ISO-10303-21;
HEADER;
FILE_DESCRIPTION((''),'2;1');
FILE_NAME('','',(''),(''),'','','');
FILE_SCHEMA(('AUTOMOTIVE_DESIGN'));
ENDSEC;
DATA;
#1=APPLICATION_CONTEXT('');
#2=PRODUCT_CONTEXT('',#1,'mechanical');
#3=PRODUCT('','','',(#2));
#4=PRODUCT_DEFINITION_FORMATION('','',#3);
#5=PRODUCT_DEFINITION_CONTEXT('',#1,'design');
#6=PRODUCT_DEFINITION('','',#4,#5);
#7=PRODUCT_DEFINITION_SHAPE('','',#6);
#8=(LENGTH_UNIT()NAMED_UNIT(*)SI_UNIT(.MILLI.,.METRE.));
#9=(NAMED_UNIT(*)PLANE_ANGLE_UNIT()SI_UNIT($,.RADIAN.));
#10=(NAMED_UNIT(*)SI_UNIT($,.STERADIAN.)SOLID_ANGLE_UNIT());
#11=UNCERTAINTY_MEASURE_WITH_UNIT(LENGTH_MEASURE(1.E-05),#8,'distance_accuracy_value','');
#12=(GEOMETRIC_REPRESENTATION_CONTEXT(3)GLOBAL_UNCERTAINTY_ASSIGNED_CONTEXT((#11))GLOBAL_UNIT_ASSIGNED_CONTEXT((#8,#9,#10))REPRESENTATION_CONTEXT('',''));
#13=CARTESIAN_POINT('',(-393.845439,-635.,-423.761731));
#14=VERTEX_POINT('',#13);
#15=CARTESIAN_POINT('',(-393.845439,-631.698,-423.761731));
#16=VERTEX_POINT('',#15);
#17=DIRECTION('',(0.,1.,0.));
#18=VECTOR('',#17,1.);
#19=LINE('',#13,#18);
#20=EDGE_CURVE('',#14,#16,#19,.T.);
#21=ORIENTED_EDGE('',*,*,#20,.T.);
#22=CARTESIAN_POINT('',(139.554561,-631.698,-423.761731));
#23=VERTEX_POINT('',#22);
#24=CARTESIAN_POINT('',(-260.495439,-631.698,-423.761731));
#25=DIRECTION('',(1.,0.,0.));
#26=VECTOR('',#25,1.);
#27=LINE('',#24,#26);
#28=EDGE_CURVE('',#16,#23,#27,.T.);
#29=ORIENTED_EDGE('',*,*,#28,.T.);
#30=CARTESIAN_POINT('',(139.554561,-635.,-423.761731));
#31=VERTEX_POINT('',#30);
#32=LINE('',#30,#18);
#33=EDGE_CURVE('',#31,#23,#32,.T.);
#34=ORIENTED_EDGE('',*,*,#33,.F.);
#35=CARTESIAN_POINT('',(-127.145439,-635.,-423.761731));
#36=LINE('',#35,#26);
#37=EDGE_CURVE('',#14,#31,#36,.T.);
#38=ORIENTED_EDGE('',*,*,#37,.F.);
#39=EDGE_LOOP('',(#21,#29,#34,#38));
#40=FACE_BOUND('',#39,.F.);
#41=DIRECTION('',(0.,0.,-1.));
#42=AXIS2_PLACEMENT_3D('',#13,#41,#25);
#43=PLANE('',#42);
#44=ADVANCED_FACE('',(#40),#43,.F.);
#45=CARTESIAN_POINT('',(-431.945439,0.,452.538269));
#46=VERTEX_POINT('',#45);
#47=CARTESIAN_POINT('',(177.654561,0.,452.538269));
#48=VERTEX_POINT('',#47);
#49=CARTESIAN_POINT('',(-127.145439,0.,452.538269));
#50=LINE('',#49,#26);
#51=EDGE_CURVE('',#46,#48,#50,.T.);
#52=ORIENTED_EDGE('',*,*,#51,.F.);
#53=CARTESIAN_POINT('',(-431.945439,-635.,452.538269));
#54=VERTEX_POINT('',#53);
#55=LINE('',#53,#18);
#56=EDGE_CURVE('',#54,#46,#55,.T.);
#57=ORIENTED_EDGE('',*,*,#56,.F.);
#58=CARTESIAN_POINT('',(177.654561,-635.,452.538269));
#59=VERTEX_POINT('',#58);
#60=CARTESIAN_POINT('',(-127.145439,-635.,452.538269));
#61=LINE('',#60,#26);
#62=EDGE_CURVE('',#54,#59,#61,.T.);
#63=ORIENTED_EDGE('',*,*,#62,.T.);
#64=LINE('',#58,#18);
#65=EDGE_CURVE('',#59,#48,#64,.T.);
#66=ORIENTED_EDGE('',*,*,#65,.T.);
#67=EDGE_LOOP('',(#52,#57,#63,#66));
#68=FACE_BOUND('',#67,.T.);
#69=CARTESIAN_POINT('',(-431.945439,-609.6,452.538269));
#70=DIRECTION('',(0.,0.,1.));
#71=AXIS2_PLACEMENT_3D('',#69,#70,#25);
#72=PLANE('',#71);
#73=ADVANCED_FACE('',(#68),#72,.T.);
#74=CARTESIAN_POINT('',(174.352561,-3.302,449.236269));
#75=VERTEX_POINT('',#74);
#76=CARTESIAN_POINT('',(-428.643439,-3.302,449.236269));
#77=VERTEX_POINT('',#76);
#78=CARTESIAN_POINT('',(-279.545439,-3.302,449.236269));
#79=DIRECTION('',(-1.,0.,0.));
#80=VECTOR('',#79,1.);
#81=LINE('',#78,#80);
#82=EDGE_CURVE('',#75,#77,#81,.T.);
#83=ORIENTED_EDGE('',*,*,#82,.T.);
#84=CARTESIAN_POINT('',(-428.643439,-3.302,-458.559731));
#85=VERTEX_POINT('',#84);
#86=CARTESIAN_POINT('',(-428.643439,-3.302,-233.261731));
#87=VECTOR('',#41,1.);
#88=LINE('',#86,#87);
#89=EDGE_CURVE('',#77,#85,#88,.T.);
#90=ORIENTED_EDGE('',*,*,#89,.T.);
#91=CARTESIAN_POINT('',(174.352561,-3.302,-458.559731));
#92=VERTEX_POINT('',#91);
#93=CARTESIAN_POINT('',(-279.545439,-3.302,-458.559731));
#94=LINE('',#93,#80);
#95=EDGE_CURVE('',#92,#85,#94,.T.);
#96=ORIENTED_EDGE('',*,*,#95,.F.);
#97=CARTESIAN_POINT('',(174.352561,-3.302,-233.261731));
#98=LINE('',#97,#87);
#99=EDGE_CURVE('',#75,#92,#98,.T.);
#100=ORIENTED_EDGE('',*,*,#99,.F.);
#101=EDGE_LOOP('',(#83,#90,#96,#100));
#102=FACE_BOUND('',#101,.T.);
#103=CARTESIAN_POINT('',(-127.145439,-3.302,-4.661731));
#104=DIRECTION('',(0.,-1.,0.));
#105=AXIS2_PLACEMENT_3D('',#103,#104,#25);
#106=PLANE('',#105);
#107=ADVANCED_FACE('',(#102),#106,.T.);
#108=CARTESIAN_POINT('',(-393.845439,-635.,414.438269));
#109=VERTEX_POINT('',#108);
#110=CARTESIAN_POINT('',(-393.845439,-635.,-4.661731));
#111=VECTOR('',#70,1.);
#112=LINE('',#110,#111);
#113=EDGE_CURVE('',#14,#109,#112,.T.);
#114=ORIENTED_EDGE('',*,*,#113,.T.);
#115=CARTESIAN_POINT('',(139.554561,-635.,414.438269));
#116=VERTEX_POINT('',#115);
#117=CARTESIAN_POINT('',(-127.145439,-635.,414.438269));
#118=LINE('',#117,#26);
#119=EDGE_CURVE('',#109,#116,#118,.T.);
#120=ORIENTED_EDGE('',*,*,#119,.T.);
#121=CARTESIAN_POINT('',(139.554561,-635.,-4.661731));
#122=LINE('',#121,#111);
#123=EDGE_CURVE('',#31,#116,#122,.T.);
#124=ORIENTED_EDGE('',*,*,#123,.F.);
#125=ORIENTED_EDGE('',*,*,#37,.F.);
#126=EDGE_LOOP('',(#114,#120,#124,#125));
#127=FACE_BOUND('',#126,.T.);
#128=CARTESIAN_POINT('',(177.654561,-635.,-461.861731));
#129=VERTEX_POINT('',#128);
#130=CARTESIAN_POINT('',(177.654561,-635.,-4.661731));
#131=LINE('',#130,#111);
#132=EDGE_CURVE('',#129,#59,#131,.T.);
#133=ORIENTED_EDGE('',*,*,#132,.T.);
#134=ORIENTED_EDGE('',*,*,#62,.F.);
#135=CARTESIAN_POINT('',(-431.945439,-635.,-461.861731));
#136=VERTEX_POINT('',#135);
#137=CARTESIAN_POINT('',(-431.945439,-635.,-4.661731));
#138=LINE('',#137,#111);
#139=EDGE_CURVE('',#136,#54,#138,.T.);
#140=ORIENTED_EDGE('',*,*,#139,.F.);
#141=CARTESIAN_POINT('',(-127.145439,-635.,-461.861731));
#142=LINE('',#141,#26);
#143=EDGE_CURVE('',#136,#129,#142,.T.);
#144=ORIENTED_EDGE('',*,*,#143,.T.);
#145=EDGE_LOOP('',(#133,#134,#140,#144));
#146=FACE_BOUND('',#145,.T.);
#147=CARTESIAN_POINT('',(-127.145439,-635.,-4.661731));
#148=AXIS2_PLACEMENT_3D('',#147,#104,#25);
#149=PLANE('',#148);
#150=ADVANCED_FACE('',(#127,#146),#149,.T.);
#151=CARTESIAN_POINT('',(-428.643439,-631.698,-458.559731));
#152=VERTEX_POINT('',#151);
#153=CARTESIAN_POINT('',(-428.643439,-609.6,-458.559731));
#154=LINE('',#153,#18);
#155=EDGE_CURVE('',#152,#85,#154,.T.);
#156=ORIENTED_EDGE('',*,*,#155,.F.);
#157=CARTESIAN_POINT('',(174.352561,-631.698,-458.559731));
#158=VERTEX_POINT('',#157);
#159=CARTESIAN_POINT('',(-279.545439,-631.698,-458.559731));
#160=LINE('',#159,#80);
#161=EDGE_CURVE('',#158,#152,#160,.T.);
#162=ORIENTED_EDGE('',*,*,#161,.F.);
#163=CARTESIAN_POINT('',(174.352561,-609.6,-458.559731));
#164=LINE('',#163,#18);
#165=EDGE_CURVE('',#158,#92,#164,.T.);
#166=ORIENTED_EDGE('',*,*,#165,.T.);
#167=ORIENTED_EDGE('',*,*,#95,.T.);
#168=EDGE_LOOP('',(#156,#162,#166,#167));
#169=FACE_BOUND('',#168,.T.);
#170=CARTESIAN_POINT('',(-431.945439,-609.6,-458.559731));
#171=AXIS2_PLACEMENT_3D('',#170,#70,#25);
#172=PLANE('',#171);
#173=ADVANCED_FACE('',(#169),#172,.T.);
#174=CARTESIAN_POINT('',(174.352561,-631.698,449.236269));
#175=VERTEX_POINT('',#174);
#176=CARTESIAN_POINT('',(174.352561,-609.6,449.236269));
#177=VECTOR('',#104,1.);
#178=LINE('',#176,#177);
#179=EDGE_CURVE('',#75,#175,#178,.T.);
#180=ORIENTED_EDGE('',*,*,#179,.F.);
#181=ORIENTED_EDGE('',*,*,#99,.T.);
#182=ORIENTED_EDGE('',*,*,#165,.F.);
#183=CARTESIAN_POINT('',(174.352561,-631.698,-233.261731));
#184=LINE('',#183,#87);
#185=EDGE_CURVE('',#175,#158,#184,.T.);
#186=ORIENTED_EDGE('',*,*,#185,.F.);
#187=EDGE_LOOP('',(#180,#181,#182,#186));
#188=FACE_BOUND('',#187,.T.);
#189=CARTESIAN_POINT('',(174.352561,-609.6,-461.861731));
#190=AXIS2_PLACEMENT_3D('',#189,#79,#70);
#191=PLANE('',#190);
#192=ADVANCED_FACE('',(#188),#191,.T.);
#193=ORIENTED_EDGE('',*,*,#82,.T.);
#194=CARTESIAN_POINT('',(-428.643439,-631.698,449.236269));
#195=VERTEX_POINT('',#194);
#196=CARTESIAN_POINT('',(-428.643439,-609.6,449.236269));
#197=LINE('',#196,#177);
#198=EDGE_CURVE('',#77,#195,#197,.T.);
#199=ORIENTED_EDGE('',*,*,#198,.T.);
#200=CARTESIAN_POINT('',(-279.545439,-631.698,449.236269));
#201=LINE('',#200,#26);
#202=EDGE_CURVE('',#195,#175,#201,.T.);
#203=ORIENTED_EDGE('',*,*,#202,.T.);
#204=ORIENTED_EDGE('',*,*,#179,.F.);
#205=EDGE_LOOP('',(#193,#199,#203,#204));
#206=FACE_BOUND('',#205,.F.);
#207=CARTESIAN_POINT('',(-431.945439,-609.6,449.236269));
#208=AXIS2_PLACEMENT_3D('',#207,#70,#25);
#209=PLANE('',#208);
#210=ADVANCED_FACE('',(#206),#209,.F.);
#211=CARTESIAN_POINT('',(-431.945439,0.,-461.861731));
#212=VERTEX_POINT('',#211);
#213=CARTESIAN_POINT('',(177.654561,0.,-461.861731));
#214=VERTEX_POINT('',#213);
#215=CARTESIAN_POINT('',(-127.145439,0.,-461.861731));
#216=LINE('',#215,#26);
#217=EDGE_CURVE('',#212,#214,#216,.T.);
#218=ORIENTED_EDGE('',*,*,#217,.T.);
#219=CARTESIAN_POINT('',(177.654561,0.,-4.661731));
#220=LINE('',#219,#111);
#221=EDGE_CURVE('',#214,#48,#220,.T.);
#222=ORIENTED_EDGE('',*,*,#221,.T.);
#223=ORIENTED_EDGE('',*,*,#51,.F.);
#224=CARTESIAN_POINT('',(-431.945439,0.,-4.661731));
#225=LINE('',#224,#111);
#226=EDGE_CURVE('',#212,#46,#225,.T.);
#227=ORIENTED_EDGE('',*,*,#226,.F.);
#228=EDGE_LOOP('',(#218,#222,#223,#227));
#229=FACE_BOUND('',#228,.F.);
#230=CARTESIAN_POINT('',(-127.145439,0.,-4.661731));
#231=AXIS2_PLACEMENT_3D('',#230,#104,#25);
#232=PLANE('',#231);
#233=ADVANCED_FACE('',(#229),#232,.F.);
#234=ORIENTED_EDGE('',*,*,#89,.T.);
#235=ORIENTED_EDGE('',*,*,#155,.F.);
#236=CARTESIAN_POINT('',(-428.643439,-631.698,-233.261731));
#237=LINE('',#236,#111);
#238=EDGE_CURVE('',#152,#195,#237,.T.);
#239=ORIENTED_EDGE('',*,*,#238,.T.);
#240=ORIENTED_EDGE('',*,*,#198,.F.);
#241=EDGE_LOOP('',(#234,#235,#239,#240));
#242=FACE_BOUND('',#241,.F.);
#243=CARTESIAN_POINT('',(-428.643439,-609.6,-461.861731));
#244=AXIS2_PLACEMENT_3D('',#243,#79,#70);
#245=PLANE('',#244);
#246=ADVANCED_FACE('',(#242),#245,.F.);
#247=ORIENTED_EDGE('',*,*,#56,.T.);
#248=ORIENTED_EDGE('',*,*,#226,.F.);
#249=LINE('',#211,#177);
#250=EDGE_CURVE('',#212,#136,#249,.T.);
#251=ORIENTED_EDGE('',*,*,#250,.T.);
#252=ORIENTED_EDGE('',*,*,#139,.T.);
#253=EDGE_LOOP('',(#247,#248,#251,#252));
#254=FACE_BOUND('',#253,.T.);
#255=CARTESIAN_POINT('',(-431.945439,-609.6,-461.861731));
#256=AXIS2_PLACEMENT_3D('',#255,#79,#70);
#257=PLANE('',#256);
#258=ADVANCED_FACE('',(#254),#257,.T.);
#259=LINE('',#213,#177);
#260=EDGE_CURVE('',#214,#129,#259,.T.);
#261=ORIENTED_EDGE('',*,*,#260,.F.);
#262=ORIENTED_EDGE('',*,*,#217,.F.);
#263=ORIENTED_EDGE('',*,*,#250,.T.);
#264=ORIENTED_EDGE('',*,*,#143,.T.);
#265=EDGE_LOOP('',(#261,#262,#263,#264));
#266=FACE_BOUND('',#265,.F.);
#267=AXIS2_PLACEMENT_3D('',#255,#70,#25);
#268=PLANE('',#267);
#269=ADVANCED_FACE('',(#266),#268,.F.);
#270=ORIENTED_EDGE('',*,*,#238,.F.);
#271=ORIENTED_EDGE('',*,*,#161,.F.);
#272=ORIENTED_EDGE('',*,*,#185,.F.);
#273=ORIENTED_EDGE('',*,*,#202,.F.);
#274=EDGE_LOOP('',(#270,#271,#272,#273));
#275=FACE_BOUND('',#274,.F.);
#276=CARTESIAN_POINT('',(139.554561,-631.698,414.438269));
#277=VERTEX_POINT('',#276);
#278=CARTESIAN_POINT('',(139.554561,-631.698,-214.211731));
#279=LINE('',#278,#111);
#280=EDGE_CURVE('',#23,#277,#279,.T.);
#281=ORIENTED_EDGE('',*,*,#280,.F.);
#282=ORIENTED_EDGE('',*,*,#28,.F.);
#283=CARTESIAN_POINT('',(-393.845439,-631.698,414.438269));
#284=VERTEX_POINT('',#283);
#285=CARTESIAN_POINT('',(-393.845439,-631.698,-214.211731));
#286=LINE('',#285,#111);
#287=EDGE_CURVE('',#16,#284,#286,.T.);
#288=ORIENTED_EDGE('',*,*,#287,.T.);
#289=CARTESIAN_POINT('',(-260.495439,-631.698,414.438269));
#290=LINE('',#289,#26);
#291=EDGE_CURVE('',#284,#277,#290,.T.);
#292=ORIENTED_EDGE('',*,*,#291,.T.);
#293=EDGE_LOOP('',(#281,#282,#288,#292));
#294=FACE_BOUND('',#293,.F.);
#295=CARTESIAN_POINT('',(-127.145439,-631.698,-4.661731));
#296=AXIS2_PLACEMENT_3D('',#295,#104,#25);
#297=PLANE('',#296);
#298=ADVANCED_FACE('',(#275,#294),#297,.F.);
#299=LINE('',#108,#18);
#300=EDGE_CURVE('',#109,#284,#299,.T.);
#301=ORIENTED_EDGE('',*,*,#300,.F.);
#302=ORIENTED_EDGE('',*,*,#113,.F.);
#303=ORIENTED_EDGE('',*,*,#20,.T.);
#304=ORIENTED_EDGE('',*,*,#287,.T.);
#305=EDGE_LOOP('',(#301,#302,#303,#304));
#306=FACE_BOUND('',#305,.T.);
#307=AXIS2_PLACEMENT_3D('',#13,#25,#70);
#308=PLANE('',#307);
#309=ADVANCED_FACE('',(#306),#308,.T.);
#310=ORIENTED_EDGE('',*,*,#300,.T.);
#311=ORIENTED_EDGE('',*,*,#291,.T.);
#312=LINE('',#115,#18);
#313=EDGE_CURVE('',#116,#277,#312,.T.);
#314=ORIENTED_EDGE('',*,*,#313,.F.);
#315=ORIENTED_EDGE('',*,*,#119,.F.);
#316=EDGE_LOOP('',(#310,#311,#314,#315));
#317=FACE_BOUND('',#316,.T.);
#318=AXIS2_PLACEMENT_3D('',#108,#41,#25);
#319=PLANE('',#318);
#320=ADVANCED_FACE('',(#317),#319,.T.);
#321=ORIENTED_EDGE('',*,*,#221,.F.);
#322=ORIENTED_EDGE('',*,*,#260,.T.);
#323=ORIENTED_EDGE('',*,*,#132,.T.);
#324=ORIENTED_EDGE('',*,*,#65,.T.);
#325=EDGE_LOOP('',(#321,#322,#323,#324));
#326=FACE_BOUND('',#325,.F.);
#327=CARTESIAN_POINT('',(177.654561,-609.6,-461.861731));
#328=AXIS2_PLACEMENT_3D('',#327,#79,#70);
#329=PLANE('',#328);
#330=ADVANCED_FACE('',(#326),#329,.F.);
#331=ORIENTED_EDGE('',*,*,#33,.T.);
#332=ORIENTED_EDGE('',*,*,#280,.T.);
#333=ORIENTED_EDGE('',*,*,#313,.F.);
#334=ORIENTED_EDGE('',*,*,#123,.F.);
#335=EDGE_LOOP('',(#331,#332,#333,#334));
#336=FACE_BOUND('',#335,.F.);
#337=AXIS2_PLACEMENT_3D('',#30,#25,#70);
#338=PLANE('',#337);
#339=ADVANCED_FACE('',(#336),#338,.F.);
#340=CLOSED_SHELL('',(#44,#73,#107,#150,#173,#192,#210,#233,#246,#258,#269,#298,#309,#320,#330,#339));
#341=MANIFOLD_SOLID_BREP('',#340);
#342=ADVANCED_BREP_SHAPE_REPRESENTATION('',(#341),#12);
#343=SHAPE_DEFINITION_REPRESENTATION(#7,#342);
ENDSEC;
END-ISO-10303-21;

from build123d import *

# Parameters (mm, degrees)
F0_W     = 609.6
F0_H     = 914.4
F1_DEPTH = 609.6
F2_DEPTH = 25.4
F3_T     = -3.302
F4_W     = 533.4
F4_H     = 838.2
F5_DEPTH = 584.2


with BuildPart() as f1:
    # F0 (on Front) → F1 (new body)
    with BuildSketch(Plane.XZ):
        with Locations((-127.1454390585, -4.6617306446)):
            Rectangle(F0_W, F0_H)
    extrude(amount=F1_DEPTH)

    # F2 (add): a face of the model
    f2_faces = [f1.faces().sort_by_distance(p)[0] for p in [
        (-127.1454390585, -609.6, -4.6617306446),
    ]]
    extrude(f2_faces, amount=F2_DEPTH)

    # F3 (hollow: no face is removed)
    offset(amount=F3_T, mode=Mode.SUBTRACT)

    # F4 (on face) → F5 (cut)
    with BuildSketch(Plane.XZ.offset(635)):
        with Locations((-127.1454390585, -4.6617306446)):
            Rectangle(F4_W, F4_H)
    extrude(amount=-F5_DEPTH, mode=Mode.SUBTRACT)


solid = f1.part
